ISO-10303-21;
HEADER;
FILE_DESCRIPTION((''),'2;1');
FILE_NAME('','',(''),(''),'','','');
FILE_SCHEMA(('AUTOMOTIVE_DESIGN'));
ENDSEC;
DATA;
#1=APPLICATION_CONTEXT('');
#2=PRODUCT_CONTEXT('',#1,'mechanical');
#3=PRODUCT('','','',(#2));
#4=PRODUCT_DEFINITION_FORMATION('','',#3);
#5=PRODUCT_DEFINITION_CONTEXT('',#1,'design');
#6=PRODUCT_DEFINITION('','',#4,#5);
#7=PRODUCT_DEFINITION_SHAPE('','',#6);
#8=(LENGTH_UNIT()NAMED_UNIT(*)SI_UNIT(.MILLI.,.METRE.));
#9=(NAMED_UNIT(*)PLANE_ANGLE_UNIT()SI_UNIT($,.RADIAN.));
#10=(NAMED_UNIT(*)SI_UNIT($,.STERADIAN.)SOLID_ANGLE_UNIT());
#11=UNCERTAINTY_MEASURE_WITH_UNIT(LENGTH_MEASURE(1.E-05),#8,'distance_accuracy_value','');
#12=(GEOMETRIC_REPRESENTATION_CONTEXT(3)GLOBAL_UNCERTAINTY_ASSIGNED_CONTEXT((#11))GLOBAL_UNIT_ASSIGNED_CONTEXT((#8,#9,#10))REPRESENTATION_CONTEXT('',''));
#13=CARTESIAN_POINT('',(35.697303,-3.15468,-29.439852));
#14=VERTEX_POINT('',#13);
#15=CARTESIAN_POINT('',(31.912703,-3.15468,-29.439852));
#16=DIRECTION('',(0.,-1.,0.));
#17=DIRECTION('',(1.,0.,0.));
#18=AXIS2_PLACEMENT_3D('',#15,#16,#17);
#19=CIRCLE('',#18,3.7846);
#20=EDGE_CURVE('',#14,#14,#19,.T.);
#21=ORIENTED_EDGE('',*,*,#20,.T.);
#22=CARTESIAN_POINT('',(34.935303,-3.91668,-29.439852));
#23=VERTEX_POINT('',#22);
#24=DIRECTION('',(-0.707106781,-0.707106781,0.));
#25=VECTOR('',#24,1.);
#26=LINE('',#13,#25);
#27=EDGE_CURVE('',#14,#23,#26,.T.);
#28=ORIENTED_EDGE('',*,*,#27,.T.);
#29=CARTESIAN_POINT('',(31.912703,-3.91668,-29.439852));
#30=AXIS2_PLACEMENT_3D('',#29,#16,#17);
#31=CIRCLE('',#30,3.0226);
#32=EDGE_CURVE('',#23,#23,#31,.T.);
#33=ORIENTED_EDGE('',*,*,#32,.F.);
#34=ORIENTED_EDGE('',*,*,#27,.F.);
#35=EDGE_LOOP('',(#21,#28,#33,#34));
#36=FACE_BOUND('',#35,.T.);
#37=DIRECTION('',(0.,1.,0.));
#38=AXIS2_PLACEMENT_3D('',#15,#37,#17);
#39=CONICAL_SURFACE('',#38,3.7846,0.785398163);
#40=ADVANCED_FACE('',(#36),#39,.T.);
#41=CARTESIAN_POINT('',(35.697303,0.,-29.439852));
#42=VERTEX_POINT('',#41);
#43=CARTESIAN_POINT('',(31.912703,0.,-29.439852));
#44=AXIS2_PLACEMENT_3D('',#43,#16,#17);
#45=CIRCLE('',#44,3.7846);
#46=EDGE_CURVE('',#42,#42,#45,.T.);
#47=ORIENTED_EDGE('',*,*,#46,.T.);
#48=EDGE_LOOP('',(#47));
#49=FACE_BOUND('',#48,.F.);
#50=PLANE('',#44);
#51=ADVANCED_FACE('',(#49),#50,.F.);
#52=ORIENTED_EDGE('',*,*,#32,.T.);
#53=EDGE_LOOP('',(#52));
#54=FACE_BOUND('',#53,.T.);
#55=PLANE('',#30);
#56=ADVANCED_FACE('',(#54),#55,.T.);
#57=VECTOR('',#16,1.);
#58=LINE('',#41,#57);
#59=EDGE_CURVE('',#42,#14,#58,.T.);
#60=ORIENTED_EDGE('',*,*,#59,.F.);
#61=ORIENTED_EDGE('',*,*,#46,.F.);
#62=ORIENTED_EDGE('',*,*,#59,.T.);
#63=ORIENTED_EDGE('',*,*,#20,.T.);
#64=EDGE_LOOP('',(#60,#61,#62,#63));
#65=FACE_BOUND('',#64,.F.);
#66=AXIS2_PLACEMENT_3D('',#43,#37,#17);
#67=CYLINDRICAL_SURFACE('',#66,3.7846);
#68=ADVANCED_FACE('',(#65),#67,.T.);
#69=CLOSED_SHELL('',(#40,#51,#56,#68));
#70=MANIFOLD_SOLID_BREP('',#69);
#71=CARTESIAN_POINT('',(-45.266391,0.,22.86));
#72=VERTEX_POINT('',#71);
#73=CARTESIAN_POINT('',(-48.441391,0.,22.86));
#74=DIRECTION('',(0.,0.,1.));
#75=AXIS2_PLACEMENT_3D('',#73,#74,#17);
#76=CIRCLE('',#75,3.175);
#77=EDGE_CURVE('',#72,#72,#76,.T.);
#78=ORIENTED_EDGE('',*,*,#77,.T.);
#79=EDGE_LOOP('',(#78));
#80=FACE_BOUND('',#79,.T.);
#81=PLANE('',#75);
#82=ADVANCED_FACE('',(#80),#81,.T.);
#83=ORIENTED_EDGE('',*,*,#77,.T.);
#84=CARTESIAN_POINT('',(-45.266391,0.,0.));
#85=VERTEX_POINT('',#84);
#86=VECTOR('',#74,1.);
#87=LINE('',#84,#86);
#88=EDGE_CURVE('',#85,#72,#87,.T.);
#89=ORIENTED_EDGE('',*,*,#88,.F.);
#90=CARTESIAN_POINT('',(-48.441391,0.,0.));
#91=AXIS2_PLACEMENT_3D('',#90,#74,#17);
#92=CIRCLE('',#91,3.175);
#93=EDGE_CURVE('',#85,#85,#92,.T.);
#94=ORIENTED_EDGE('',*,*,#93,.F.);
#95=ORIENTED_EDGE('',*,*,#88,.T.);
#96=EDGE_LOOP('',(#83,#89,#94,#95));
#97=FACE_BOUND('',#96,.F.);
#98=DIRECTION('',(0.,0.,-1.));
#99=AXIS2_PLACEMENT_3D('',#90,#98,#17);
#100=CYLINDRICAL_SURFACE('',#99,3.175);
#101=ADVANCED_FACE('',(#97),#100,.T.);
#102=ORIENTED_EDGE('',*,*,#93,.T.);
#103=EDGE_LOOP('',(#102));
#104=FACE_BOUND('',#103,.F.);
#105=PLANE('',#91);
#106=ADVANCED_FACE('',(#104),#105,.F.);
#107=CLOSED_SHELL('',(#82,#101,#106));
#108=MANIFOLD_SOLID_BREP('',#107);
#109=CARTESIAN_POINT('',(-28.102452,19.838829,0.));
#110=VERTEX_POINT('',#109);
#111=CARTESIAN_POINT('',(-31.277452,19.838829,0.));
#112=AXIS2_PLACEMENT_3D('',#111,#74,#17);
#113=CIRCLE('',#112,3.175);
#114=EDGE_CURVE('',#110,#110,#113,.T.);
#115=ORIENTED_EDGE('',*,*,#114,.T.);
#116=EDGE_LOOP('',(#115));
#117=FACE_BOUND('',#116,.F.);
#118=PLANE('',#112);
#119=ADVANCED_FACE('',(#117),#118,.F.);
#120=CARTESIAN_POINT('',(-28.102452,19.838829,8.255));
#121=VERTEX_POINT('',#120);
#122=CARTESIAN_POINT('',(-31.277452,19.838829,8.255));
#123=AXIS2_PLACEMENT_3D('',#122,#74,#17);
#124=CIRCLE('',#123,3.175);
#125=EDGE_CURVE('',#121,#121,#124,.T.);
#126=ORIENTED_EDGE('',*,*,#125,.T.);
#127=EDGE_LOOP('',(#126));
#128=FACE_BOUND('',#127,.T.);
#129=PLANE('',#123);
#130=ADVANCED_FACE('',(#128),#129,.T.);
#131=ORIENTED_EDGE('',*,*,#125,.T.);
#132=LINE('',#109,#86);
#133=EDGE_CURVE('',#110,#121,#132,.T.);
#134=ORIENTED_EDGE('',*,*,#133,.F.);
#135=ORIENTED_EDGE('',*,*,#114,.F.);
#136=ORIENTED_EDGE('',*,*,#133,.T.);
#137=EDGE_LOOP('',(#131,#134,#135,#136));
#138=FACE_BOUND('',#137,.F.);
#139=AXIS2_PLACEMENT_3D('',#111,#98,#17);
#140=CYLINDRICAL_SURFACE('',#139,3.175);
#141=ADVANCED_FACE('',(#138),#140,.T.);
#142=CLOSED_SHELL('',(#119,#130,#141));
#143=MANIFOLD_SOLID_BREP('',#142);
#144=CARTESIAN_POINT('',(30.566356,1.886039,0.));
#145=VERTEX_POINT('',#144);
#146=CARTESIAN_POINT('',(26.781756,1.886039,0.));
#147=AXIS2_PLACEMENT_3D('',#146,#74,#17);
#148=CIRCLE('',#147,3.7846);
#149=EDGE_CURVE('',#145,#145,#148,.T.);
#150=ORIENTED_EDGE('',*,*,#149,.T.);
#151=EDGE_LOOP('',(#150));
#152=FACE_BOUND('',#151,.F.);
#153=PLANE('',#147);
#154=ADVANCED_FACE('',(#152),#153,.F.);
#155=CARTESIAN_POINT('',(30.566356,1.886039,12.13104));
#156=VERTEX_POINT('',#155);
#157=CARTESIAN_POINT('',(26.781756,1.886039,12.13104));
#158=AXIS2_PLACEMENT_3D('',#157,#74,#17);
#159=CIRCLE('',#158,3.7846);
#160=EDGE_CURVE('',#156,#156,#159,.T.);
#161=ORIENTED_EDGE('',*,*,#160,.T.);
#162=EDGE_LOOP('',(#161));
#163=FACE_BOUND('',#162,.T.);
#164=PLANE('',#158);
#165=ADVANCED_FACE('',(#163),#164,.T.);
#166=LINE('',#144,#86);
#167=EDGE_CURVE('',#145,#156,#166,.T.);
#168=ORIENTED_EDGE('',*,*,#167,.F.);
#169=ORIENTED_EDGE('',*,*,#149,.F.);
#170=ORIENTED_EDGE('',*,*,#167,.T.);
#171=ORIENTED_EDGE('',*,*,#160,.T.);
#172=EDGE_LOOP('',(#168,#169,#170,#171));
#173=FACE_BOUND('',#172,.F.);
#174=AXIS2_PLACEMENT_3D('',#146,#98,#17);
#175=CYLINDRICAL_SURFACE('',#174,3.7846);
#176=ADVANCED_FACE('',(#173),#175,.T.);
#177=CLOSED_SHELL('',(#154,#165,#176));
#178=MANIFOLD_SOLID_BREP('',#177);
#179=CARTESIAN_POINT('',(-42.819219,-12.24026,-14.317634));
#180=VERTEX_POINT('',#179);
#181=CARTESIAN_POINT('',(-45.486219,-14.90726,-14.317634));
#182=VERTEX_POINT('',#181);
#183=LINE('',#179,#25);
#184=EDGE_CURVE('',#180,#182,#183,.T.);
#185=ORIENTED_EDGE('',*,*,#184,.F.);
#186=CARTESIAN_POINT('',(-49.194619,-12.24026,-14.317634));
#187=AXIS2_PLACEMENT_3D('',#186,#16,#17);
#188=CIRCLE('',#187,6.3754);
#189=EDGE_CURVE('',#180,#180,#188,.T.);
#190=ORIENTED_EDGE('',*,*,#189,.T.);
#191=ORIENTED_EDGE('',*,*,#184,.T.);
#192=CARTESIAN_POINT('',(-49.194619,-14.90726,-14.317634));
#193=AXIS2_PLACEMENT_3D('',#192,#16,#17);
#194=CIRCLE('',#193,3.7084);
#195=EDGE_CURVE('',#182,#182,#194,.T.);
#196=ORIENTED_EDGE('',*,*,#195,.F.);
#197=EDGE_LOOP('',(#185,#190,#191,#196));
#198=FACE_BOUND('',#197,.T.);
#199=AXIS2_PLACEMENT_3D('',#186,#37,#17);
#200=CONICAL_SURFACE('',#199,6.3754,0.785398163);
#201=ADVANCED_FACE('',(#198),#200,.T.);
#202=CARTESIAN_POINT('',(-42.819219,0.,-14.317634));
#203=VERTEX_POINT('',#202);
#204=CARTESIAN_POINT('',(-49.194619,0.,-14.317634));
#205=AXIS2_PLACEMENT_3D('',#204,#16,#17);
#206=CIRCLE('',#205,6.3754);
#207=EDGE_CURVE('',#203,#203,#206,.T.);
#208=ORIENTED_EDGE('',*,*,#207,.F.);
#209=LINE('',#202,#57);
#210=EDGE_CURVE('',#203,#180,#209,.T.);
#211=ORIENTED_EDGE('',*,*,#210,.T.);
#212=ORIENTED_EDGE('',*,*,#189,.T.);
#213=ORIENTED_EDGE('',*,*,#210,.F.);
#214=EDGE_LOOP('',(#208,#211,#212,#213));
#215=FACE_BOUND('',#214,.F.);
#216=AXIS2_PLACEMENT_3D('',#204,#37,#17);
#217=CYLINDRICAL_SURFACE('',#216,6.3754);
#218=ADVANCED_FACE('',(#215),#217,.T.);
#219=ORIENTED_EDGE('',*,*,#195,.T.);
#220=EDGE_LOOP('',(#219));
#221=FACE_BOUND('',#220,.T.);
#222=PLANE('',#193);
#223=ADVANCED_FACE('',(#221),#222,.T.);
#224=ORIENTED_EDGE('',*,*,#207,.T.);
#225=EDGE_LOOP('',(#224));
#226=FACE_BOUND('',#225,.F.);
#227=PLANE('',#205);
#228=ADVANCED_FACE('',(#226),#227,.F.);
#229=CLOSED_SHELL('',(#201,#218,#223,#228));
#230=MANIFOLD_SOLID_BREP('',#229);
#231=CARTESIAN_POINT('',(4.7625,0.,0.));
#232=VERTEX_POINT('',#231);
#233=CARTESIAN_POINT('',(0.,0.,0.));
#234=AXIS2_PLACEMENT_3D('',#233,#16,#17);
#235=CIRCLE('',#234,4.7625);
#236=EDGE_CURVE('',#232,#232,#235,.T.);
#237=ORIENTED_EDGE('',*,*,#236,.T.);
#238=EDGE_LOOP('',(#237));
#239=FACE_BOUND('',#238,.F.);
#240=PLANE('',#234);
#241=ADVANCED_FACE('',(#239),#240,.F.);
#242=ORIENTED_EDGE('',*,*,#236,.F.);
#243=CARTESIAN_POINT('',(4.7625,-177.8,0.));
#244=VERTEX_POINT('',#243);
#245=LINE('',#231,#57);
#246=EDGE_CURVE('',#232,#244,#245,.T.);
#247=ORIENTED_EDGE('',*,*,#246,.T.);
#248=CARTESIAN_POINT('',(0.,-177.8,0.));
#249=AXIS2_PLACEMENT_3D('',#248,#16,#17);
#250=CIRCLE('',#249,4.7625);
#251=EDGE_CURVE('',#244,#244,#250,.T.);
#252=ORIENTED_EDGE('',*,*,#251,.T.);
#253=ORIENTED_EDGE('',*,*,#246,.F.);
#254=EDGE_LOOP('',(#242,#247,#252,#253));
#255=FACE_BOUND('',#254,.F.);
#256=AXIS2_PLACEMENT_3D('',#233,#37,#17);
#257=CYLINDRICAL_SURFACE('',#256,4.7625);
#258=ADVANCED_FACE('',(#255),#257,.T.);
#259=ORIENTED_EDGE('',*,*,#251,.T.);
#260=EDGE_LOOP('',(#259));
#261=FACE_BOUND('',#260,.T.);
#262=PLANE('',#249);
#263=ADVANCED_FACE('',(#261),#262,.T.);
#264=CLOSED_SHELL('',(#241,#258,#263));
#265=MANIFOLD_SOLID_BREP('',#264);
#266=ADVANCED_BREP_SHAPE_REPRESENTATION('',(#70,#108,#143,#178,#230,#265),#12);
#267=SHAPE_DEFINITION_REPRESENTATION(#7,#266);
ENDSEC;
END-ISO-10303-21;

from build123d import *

# Parameters (mm, degrees)
F0_R      = 4.7625
F1_DEPTH  = 177.8
F4_R      = 3.175
F5_DEPTH  = 8.255
F2_R      = 3.175
F6_DEPTH  = 22.86
F8_R      = 3.7846
F9_DEPTH  = 12.13104
F10_R     = 6.3754
F11_DEPTH = 14.90726
F12_SIZE  = 2.667
F13_R     = 3.7846
F14_DEPTH = 3.91668
F15_SIZE  = 0.762


# Not quite as in the source:
# - the program builds the solid bodies; features that only make, move or delete a surface that nothing else refers to are left out


with BuildPart() as f1:
    # F0 (on Front) → F1 (new body)
    with BuildSketch(Plane.XZ):
        Circle(F0_R)
    extrude(amount=F1_DEPTH)


with BuildPart() as f5:
    # F4 (on Top) → F5 (new body)
    with BuildSketch(Plane.XY):
        with Locations((-31.2774516642, 19.8388285935)):
            Circle(F4_R)
    extrude(amount=F5_DEPTH)


with BuildPart() as f6:
    # F2 (on Top) → F6 (new body)
    with BuildSketch(Plane.XY):
        with Locations((-48.4413914382, 0)):
            Circle(F2_R)
    extrude(amount=F6_DEPTH)


with BuildPart() as f9:
    # F8 (on Top) → F9 (new body)
    with BuildSketch(Plane.XY):
        with Locations((26.7817564309, 1.8860386917)):
            Circle(F8_R)
    extrude(amount=F9_DEPTH)


with BuildPart() as f11:
    # F10 (on Front) → F11 (new body)
    with BuildSketch(Plane.XZ):
        with Locations((-49.1946190596, -14.3176335841)):
            Circle(F10_R)
    extrude(amount=F11_DEPTH)

    # F12
    f12_edges = [f11.edges().sort_by_distance(p)[0] for p in [
        (-55.570019, -14.90726, -14.317634),
    ]]
    chamfer(f12_edges, length=F12_SIZE)


with BuildPart() as f14:
    # F13 (on Front) → F14 (new body)
    with BuildSketch(Plane.XZ):
        with Locations((31.9127030671, -29.4398516417)):
            Circle(F13_R)
    extrude(amount=F14_DEPTH)

    # F15
    f15_edges = [f14.edges().sort_by_distance(p)[0] for p in [
        (28.128103, -3.91668, -29.439852),
    ]]
    chamfer(f15_edges, length=F15_SIZE)


solid = Compound([f1.part, f5.part, f6.part, f9.part, f11.part, f14.part])
